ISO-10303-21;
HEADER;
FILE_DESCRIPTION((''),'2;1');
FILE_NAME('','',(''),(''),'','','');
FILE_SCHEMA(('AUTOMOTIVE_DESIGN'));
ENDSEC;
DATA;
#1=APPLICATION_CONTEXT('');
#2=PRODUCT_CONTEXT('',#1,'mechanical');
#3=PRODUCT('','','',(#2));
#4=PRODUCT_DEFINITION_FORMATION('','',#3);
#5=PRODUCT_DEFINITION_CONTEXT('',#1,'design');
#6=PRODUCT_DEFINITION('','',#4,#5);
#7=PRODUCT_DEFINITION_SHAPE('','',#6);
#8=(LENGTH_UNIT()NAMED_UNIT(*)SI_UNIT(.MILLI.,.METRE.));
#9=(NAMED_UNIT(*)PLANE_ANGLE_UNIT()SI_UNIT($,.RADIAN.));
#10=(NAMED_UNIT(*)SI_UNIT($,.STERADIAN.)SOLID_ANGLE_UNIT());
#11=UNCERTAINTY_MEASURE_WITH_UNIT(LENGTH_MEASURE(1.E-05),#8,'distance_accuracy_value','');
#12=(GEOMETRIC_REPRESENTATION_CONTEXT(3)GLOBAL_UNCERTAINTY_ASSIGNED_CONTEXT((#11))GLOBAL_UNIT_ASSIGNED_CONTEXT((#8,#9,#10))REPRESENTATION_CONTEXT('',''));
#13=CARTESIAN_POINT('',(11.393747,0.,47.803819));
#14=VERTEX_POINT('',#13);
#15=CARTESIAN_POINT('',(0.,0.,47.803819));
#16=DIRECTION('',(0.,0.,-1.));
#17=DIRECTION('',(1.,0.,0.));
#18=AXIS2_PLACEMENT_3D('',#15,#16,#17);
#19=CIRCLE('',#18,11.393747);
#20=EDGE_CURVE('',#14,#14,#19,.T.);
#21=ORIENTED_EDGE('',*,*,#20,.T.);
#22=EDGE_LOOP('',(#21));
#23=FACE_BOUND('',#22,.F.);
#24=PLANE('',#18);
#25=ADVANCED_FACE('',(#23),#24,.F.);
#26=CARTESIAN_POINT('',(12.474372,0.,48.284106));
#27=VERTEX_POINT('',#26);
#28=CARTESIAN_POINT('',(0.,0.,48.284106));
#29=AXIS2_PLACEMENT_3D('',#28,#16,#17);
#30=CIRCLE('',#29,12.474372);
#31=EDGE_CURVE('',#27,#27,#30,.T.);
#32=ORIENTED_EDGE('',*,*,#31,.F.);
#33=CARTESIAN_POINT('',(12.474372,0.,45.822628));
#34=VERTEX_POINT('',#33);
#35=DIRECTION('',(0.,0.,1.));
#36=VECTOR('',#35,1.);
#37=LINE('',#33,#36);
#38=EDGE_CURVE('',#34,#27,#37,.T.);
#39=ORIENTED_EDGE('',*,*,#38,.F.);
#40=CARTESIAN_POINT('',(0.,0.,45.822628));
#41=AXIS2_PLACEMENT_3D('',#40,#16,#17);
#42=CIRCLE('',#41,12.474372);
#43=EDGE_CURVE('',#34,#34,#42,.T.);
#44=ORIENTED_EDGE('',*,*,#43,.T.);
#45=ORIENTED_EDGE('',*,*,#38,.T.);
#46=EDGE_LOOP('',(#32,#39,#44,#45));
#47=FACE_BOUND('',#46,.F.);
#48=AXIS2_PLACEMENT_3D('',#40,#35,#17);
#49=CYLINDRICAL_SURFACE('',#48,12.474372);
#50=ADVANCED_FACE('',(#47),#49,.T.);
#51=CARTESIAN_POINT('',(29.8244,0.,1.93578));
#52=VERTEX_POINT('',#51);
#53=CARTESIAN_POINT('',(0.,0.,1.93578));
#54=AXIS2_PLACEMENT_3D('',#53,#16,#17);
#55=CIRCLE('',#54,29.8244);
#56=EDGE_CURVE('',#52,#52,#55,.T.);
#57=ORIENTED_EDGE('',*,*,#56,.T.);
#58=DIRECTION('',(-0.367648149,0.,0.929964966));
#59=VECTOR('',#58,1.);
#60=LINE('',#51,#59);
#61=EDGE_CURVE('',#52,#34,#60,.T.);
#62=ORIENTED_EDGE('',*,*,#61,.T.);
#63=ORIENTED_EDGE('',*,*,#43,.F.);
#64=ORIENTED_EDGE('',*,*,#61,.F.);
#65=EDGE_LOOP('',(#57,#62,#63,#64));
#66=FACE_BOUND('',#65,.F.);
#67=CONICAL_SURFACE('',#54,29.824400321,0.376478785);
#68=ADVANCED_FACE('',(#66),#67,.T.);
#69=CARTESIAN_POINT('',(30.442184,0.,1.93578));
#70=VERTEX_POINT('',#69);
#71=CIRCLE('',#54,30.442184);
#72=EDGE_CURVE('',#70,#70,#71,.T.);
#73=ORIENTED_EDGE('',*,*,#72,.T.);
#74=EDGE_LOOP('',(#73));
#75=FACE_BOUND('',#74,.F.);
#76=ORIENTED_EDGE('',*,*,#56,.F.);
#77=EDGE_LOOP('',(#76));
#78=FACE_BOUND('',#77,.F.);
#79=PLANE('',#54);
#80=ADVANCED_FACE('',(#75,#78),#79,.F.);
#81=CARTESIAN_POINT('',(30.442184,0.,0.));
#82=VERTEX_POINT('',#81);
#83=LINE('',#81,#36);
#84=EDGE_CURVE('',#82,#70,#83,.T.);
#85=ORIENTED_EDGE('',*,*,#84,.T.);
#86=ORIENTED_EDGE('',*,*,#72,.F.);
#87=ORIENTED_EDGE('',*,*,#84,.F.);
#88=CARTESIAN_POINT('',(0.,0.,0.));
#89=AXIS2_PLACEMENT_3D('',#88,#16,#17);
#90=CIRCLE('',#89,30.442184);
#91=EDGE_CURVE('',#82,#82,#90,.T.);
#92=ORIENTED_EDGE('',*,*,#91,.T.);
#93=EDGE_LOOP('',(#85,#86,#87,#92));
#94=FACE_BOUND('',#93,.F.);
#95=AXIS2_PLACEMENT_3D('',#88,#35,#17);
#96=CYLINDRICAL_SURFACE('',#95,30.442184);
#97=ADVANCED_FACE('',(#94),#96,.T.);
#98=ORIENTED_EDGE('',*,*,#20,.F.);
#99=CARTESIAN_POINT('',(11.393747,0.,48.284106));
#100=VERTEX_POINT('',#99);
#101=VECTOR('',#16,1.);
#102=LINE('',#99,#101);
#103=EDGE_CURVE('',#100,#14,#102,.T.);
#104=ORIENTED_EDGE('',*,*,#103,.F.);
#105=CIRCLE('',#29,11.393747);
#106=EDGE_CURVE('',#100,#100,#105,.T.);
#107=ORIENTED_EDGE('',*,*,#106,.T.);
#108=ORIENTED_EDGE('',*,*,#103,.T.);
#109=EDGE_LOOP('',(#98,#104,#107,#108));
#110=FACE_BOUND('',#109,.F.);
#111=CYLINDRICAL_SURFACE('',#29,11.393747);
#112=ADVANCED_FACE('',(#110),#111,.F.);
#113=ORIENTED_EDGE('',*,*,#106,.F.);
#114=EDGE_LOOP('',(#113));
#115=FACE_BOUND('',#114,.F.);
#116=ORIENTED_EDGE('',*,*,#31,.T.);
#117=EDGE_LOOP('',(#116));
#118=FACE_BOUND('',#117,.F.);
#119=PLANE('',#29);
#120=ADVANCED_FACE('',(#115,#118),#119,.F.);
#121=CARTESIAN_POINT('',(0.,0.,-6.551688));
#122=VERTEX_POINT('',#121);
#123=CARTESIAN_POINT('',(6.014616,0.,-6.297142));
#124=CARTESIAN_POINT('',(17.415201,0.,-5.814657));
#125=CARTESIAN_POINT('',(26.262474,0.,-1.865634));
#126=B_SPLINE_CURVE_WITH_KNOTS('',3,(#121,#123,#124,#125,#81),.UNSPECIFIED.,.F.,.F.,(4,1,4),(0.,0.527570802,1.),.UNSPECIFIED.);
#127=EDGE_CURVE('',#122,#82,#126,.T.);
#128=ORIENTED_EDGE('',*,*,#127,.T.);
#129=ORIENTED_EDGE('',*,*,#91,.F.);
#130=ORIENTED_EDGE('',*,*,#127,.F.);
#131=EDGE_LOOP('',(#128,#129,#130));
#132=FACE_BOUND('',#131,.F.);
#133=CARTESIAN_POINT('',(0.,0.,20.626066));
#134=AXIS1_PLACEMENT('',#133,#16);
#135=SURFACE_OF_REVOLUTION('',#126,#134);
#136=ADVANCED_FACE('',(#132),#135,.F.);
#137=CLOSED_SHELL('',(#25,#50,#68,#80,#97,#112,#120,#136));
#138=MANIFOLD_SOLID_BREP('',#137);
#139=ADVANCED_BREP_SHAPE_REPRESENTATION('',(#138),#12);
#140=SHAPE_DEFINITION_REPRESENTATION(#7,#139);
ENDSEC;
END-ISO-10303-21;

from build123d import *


# Not quite as in the source:
# - a feature of the source that left no trace in its solid (it failed there, or was rolled back) is left out


with BuildPart() as f1:
    # F0 (on Front) → F1 (revolve)
    with BuildSketch(Plane.XZ):
        with BuildLine():
            Line((11.3937472925, 47.8038191795), (0, 47.8038191795))
            Line((0, 47.8038191795), (0, -6.5516876057))
            add(Edge.make_bspline(
                [(0, -6.5516876057), (6.0146157822, -6.2971422391), (17.4152007991, -5.8146565414), (26.2624737662, -1.8656336954), (30.4421838373, 0)],
                knots=[0, 0, 0, 0, 0.5275708021, 1, 1, 1, 1], degree=3))
            Line((30.4421838373, 0), (30.4421838373, 1.9357798155))
            Line((30.4421838373, 1.9357798155), (29.8244003206, 1.9357798155))
            Line((29.8244003206, 1.9357798155), (12.4743720517, 45.8226278424))
            Line((12.4743720517, 45.8226278424), (12.4743720517, 48.2841059566))
            Line((12.4743720517, 48.2841059566), (11.3937472925, 48.2841059566))
            Line((11.3937472925, 48.2841059566), (11.3937472925, 47.8038191795))
        make_face()
    revolve(axis=Axis((0, 0, 20.6260657869), (0, 0, -1)))


solid = f1.part
